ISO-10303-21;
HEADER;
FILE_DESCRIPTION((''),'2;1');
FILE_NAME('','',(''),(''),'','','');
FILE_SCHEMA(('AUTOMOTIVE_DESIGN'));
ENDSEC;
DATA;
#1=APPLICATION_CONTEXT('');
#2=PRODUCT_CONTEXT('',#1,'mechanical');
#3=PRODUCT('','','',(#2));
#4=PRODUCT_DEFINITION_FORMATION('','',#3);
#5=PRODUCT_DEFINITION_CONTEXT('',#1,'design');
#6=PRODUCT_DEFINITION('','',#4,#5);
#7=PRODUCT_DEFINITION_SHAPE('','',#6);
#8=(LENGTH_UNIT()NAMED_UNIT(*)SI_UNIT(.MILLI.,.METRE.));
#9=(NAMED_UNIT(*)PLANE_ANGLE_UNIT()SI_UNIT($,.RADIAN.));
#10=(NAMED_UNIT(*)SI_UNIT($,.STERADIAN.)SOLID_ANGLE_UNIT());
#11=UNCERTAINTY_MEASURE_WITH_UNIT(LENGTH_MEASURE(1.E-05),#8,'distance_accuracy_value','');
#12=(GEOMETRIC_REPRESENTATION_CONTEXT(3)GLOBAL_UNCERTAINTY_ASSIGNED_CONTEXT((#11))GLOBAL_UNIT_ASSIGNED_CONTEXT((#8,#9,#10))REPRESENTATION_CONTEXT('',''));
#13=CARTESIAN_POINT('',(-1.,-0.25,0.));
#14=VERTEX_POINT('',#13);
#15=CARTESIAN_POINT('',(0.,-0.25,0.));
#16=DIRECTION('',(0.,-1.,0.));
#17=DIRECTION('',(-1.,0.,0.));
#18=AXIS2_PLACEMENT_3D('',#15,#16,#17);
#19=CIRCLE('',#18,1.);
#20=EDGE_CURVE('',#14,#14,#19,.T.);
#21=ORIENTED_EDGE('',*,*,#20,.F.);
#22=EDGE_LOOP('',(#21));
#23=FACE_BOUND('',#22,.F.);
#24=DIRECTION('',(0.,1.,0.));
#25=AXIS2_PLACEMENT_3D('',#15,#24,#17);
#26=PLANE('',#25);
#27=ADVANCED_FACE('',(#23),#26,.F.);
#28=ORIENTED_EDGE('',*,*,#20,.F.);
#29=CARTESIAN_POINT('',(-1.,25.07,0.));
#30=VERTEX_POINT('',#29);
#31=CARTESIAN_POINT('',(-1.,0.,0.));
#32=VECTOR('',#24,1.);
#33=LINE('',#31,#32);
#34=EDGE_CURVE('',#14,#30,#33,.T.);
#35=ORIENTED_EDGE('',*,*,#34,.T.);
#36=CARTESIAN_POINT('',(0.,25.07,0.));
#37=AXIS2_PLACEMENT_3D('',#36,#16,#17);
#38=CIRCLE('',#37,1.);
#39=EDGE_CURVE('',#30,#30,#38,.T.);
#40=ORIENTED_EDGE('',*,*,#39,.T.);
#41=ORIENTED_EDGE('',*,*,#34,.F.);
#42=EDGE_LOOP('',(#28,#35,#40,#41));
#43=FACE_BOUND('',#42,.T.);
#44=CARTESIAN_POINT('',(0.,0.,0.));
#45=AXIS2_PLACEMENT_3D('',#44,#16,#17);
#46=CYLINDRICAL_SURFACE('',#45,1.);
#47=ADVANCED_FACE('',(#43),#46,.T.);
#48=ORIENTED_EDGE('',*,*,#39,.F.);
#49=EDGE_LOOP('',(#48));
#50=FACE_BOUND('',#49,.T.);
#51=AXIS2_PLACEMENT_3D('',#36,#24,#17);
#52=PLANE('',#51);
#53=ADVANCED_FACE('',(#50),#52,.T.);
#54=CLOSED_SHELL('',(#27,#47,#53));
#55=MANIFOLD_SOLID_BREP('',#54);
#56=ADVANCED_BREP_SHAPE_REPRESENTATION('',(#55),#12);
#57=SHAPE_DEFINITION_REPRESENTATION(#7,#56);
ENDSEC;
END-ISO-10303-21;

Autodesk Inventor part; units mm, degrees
ref_plane "YZ Plane" through (0, 0, 0) normal (1, 0, 0) x (0, 1, 0)
ref_plane "XZ Plane" through (0, 0, 0) normal (0, 1, 0) x (-1, 0, 0)
ref_plane "XY Plane" through (0, 0, 0) normal (0, 0, 1) x (1, 0, 0)
sketch "Sketch1" plane through (0, 0, 0) normal (0, 1, 0) x (-1, 0, 0)
  circle A0 centre (0, 0) radius 1
  dimension "d0" = 2
extrude "Extrusion1" add sketch "Sketch1" along normal blind 26
ref_plane "Work Plane1" through (0, -30, 0) normal (0, -1, 0) x (1, 0, 0)
move faces "Move1" translate (0, -0.25, 0) faces at (-0.5848, 0, -0.397)
move faces "Move2" translate (0, -0.93, 0) faces at (-0.2495, 26, 0.221)
properties part number "LOOP2_COLL"
